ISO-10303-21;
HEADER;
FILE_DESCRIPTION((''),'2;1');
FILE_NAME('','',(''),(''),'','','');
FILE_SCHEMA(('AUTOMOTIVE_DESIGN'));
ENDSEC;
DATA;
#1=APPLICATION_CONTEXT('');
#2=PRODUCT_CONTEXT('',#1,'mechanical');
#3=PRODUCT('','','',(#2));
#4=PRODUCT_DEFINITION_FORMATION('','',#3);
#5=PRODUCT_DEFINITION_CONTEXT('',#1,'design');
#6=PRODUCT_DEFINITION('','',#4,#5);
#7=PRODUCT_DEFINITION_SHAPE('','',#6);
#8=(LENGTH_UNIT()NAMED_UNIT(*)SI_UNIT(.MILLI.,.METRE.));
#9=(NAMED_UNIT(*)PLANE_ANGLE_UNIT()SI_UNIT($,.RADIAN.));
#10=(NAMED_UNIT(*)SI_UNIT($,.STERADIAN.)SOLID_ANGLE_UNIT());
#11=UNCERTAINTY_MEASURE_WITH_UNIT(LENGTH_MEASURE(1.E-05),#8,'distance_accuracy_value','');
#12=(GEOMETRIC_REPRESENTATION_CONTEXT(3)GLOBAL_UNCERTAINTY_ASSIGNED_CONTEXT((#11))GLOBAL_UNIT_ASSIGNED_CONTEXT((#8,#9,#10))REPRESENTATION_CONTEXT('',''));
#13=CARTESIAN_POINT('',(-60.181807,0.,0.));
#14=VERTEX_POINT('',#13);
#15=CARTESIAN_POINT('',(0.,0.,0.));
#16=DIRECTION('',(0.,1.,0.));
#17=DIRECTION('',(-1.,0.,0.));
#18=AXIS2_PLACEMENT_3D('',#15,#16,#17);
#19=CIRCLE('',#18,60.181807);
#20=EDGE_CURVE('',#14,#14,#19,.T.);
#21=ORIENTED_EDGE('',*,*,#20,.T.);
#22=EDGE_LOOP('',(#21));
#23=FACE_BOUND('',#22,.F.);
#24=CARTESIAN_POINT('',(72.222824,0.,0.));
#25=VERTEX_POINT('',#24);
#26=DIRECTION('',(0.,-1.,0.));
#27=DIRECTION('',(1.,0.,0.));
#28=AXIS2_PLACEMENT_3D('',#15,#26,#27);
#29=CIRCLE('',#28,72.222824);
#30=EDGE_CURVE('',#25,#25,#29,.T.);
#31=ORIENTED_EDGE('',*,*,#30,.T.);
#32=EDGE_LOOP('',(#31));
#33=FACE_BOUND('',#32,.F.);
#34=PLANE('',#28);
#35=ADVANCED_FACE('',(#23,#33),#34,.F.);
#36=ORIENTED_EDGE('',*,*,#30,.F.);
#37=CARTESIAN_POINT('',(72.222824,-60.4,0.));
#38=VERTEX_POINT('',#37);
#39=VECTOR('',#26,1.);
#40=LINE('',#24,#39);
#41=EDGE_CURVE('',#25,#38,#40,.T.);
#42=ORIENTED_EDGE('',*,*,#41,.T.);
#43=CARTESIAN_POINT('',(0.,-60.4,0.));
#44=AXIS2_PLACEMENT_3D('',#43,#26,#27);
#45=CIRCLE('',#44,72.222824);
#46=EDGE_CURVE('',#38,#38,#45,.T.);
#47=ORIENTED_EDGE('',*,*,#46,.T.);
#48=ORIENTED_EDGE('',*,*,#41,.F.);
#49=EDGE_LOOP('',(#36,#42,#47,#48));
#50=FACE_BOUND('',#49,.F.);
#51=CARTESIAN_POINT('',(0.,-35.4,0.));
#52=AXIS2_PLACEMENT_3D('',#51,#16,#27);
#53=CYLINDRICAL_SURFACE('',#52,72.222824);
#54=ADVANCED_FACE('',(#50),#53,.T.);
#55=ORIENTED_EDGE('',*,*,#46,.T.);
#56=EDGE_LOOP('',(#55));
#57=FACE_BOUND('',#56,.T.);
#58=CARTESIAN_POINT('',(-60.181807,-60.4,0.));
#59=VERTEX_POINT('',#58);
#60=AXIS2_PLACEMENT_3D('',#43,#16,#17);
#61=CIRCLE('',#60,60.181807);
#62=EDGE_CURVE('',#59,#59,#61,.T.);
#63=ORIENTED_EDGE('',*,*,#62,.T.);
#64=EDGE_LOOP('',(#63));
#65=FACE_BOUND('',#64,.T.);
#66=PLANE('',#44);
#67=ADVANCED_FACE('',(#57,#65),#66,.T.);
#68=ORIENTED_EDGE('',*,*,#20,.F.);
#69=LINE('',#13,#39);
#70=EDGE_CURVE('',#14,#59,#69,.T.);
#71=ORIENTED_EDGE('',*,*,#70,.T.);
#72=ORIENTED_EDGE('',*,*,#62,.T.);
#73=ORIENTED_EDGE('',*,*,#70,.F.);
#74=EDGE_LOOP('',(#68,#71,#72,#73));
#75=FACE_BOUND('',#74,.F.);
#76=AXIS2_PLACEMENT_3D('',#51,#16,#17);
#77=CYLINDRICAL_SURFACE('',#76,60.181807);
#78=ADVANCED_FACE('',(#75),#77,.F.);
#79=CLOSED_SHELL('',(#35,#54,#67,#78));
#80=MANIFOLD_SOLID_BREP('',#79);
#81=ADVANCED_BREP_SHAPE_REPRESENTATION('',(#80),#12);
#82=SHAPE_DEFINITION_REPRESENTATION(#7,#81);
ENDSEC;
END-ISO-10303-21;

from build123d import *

# Parameters (mm, degrees)
F0_R     = 72.2228243582
F1_DEPTH = 10
F2_R     = 72.2228243582
F3_DEPTH = 25.4
F5_R     = 13.3709609509
F6_DEPTH = 226
F4_R     = 60.1818073618
F7_DEPTH = 139.5800691098
F8_DEPTH = 25


# Not quite as in the source:
# - an extrude ends at something that could not be found from the text; its depth is read off the source's solid


with BuildPart() as f1:
    # F0 (on Front) → F1 (new body)
    with BuildSketch(Plane.XZ):
        Circle(F0_R)
    extrude(amount=F1_DEPTH)

    # F2 (on face) → F3 (join)
    with BuildSketch(Plane.XZ.offset(10)):
        Circle(F2_R)
    extrude(amount=F3_DEPTH)

    # F5 (on Front) → F6 (cut, through all)
    with BuildSketch(Plane.XZ):
        with Locations((0, 13.3709609509)):
            Circle(F5_R)
    extrude(amount=-F6_DEPTH, mode=Mode.SUBTRACT)

    # F4 (on face) → F7 (cut)
    with BuildSketch(Plane(origin=(0, 0, 0), x_dir=(-1, 0, 0), z_dir=(0, 1, 0))):
        Circle(F4_R)
    extrude(amount=-F7_DEPTH, mode=Mode.SUBTRACT)

    # F8 (add): a face of the model
    f8_faces = [f1.faces().sort_by_distance(p)[0] for p in [
        (-70.1800544038, -35.4, 0),
    ]]
    extrude(f8_faces, amount=F8_DEPTH)


solid = f1.part
